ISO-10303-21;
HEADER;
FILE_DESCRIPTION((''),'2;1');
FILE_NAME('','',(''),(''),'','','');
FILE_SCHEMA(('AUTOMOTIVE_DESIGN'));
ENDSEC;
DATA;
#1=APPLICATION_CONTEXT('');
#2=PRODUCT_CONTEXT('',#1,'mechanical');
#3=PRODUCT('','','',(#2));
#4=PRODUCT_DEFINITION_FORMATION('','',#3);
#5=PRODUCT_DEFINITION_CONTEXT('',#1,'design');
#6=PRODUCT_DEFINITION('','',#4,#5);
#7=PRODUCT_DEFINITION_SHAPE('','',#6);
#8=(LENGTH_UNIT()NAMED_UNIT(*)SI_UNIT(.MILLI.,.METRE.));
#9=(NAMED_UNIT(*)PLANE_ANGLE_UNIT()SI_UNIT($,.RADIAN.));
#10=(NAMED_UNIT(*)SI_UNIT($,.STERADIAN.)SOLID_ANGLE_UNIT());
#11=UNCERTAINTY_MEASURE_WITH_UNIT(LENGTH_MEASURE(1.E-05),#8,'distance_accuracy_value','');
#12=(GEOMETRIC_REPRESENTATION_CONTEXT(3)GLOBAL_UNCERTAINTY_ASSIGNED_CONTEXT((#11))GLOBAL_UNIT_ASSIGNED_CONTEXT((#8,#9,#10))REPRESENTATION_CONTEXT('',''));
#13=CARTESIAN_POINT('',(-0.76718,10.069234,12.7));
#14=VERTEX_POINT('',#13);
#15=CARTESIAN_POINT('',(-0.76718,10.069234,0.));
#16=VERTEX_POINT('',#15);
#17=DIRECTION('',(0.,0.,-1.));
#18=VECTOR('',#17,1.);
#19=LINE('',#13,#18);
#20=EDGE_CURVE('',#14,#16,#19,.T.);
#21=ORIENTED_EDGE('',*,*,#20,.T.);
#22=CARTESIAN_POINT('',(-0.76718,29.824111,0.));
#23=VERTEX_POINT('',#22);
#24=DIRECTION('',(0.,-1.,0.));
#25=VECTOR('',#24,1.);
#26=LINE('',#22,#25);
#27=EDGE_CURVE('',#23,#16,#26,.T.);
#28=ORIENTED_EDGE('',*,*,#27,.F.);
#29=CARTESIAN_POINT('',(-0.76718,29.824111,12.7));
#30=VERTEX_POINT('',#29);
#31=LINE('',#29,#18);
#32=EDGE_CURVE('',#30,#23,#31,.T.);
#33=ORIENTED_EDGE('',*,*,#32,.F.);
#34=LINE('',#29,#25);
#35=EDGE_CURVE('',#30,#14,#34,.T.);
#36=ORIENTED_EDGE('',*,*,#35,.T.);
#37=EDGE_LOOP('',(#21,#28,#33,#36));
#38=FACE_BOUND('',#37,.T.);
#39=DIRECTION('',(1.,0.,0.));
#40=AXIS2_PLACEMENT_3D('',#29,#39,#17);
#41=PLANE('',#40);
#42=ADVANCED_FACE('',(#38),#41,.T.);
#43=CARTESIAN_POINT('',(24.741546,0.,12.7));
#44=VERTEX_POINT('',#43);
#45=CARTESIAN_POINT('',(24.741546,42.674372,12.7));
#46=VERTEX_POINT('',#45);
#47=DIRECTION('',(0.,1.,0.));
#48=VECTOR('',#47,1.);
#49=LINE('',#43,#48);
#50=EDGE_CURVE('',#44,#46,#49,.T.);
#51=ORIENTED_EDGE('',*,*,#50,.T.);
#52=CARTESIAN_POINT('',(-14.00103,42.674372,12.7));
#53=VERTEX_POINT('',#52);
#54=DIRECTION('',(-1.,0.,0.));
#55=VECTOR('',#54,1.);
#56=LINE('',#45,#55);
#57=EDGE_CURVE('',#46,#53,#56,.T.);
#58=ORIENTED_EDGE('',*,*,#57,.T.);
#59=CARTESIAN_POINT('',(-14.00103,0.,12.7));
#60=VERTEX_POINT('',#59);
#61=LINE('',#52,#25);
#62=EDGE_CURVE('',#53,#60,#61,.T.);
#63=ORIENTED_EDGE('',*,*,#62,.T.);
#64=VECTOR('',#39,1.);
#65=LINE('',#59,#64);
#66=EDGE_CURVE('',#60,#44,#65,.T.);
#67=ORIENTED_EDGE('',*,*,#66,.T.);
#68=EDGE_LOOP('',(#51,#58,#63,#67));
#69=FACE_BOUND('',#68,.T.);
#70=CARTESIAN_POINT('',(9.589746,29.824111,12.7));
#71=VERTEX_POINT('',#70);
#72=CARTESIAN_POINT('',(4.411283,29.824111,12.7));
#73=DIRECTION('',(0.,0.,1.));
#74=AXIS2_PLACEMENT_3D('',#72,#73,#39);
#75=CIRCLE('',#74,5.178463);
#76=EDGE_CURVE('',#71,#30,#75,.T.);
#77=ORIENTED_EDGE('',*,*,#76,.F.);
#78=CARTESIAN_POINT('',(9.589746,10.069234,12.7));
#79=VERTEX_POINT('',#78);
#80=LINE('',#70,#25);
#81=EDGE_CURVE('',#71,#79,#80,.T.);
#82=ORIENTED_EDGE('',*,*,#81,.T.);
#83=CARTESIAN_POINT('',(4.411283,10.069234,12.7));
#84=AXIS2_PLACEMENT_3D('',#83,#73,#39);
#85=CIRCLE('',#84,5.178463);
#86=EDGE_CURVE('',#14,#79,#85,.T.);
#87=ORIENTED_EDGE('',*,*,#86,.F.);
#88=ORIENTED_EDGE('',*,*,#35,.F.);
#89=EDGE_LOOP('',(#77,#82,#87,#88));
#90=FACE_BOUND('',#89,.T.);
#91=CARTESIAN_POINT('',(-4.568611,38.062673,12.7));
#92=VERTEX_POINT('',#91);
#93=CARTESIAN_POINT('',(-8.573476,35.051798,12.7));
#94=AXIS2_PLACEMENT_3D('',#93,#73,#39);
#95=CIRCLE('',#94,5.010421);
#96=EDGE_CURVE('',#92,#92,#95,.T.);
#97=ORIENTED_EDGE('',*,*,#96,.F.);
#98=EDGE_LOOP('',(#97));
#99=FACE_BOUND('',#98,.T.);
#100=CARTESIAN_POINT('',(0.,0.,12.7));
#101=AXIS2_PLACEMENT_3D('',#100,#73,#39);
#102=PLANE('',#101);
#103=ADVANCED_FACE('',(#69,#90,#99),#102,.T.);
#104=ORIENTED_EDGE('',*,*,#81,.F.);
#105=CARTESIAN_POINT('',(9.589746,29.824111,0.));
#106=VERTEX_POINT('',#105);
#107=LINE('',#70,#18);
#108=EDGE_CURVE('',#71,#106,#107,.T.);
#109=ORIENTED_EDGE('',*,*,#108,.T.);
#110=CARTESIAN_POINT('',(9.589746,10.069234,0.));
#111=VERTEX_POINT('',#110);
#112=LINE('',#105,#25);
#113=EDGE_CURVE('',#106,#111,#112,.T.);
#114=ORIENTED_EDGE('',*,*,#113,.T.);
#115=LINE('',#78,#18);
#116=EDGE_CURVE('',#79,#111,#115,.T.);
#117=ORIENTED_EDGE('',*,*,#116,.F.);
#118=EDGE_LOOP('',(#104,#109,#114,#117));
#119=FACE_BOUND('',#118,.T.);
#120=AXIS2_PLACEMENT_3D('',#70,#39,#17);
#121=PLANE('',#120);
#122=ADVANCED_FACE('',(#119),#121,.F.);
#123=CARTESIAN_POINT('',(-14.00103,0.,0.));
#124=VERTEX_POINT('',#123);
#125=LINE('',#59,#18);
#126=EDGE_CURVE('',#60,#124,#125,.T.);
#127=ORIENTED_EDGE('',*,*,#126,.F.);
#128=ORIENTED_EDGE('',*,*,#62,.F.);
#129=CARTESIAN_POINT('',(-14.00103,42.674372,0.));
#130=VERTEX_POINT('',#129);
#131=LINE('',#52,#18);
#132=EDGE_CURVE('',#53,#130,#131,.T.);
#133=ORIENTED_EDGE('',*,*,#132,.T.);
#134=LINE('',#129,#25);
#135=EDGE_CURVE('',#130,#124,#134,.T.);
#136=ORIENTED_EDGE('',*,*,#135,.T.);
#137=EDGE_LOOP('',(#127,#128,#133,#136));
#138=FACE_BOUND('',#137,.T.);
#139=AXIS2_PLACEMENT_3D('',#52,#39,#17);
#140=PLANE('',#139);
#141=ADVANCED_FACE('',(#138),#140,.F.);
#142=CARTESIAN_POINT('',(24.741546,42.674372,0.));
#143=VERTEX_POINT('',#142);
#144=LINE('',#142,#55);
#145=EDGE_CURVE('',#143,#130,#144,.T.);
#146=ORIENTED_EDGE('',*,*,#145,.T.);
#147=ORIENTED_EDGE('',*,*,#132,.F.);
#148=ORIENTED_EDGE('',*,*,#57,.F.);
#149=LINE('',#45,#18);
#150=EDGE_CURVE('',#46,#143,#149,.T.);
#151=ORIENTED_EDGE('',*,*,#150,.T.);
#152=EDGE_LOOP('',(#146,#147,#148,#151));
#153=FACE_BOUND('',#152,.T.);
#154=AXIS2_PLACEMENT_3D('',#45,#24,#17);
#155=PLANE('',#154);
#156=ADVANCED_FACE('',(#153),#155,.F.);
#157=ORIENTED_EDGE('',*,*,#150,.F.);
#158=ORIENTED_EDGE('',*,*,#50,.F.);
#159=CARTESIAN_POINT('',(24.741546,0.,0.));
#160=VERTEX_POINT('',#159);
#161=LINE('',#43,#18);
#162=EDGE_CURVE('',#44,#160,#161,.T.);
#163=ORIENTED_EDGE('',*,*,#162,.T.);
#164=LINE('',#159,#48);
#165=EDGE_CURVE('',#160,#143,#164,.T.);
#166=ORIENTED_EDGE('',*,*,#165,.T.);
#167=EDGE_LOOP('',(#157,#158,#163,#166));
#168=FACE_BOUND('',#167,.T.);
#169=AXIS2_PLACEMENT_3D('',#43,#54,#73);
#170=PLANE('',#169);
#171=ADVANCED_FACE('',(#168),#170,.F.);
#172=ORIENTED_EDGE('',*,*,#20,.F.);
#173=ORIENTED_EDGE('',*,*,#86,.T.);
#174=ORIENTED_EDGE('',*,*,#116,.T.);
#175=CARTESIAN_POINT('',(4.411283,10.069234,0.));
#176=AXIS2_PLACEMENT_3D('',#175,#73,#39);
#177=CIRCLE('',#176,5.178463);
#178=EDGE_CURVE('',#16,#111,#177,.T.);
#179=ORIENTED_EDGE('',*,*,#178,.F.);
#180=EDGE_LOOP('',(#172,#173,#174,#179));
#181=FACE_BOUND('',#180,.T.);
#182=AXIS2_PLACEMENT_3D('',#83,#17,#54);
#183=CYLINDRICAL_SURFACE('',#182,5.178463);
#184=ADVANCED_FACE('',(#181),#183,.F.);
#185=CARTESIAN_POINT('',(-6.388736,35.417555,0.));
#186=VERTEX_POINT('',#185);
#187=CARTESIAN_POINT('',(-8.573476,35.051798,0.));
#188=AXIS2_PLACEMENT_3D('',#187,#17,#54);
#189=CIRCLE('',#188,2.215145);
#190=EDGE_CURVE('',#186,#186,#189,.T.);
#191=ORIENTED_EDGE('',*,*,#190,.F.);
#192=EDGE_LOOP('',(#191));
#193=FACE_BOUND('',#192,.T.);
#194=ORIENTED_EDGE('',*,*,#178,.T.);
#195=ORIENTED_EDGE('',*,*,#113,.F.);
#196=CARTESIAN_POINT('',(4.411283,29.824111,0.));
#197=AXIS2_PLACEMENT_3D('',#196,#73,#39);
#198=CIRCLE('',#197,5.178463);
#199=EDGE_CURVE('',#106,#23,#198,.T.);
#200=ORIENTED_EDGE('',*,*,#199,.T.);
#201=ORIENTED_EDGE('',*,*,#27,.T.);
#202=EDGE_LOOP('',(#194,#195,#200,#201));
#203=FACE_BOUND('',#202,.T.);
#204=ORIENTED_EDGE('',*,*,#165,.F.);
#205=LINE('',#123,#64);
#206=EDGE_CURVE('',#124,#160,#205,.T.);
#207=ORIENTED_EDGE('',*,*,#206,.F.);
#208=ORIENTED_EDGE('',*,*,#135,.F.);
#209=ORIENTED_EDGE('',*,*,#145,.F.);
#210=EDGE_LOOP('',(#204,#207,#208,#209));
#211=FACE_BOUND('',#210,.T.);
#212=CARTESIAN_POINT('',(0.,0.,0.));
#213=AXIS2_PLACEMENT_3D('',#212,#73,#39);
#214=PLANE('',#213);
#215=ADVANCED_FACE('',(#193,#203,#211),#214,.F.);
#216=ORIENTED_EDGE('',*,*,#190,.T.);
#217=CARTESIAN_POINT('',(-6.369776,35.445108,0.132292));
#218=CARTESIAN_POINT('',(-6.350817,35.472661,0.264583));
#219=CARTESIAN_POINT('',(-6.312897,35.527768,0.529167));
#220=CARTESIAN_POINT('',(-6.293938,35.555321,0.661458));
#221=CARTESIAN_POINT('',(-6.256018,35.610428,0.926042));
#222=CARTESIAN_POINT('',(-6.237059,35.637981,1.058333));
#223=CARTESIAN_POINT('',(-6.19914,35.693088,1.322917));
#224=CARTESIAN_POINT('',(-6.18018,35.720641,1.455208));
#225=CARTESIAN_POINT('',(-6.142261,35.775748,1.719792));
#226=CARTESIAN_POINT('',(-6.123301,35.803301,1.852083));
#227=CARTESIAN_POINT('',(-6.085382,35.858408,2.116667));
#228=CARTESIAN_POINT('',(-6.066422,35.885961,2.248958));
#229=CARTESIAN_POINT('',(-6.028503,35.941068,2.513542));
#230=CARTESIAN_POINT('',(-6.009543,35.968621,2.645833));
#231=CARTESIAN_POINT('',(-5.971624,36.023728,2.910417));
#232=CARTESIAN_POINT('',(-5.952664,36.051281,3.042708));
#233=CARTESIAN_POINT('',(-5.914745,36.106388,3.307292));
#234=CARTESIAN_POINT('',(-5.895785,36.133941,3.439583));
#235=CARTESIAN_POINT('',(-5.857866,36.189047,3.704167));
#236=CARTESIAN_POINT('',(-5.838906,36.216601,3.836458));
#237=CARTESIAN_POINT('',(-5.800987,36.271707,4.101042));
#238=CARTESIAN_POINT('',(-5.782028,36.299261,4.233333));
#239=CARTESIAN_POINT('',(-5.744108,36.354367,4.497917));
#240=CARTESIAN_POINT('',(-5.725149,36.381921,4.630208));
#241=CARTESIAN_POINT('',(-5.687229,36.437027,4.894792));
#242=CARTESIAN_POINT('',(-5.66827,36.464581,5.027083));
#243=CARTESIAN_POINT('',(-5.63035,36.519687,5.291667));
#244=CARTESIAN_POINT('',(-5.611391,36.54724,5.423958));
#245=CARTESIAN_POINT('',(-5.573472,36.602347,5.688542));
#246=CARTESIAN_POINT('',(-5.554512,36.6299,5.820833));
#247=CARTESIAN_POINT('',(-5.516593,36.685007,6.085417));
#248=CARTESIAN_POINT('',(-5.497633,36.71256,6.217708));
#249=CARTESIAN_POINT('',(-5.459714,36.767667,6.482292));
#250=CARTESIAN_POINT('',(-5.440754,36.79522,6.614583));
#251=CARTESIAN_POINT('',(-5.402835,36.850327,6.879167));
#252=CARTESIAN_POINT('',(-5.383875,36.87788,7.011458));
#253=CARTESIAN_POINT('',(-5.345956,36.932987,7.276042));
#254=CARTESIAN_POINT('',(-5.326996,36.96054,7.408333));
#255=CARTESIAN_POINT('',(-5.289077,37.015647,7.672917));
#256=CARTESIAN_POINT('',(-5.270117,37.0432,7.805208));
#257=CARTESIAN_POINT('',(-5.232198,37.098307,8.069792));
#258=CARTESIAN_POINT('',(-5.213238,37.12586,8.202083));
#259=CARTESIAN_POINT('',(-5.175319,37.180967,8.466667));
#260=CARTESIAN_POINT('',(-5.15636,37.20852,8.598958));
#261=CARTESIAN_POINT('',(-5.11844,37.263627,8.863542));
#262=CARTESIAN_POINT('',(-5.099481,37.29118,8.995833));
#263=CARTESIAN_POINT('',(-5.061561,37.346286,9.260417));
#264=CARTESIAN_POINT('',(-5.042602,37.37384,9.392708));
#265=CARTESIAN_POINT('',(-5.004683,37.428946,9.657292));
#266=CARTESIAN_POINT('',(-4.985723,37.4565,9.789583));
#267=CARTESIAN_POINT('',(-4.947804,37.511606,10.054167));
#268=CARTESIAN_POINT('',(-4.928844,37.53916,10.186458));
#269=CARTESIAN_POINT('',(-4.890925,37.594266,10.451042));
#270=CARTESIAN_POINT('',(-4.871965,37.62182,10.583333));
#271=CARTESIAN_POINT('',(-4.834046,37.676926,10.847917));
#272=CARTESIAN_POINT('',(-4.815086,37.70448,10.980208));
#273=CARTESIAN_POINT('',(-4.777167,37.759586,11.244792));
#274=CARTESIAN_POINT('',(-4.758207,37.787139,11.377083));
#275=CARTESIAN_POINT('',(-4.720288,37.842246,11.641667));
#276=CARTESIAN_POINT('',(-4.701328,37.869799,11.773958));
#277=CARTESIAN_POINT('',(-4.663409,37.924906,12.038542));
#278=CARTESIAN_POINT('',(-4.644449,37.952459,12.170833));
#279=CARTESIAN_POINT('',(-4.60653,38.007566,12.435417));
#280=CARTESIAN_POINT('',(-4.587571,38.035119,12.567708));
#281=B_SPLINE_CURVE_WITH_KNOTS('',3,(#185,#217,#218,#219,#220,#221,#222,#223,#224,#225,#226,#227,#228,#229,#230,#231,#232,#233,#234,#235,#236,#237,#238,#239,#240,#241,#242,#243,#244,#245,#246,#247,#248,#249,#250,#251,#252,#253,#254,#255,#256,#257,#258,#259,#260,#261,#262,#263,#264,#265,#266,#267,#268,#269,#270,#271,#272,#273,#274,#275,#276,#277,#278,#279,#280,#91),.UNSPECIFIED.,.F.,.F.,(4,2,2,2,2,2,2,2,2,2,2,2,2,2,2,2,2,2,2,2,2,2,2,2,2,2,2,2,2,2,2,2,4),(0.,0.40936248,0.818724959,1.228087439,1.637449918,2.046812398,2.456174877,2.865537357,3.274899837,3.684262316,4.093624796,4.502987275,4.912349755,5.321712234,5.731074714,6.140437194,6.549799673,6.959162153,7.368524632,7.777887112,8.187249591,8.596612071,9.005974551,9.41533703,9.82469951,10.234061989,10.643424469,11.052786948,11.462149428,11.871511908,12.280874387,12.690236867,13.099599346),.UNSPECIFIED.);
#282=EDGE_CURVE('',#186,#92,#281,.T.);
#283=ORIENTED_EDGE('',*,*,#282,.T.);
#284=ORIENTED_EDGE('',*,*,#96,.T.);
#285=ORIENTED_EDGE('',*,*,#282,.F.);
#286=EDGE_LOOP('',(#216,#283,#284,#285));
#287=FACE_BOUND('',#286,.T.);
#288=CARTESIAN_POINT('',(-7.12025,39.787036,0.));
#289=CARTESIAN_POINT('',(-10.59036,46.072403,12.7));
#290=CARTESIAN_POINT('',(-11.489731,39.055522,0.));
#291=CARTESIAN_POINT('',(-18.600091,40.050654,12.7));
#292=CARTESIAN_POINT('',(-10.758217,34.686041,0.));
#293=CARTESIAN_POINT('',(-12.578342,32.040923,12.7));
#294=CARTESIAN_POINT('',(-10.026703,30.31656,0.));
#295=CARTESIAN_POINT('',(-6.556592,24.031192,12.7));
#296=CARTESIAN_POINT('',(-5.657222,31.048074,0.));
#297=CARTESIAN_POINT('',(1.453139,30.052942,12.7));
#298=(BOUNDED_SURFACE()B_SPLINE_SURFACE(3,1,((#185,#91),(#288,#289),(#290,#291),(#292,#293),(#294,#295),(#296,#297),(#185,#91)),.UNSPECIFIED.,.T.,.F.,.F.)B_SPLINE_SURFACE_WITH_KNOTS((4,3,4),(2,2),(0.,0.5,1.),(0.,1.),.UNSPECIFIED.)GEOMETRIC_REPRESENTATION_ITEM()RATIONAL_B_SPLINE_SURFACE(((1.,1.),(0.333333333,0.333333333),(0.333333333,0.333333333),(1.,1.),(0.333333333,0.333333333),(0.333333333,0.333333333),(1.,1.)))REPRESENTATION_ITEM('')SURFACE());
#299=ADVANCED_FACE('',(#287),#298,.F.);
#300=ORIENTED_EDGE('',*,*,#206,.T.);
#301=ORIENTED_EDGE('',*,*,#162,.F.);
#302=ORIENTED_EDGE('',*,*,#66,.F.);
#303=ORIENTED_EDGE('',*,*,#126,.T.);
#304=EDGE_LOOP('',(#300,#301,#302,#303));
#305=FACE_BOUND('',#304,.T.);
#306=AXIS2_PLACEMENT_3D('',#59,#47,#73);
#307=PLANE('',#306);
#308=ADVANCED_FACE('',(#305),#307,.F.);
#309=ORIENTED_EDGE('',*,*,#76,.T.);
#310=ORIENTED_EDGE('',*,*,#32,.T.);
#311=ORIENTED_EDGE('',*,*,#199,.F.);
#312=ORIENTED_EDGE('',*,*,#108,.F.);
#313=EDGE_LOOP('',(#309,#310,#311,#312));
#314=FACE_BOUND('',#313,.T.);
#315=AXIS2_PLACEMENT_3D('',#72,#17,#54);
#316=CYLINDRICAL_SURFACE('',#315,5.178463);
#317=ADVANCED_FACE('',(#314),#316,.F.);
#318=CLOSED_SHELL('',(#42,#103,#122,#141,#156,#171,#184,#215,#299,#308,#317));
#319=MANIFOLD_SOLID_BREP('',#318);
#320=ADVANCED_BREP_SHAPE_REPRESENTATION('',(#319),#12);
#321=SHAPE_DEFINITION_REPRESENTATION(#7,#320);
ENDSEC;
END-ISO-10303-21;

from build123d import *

# Parameters (mm, degrees)
SKETCH1_W           = 38.742575614
SKETCH1_H           = 42.674371655
BOSS_EXTRUDE1_DEPTH = 12.7


with BuildPart() as part:
    # Sketch1 → Boss-Extrude1 (new body)
    with BuildSketch(Plane.XY):
        with Locations((5.370258006, 21.337185828)):
            Rectangle(SKETCH1_W, SKETCH1_H)
        with BuildLine():
            Line((9.589746439, 29.824111426), (9.589746439, 10.069233761))
            ThreePointArc((9.589746439, 10.069233761), (4.411283362, 4.890770684), (-0.767179715, 10.069233761))
            Line((-0.767179715, 10.069233761), (-0.767179715, 29.824111426))
            ThreePointArc((-0.767179715, 29.824111426), (4.411283362, 35.002574503), (9.589746439, 29.824111426))
        make_face(mode=Mode.SUBTRACT)
    extrude(amount=BOSS_EXTRUDE1_DEPTH)

    # Cut-Loft1: read off the stored shape, not the designer's step
    # Cut-Loft1: loft between two sections, ruled curve by curve
    cut_loft1_from = [
        Edge.make_bspline([(-6.388735864, 35.417554769, 0), (-7.120249807, 39.787035762, 0), (-11.489730799, 39.055521819, 0), (-10.758216856, 34.686040826, 0), (-10.026702913, 30.316559834, 0), (-5.657221921, 31.048073777, 0), (-6.388735864, 35.417554769, 0)], [0, 0, 0, 0, 0.5, 0.5, 0.5, 1, 1, 1, 1], 3, [1, 0.333333333, 0.333333333, 1, 0.333333333, 0.333333333, 1]),
    ]
    cut_loft1_to = [
        Edge.make_bspline([(-4.568610902, 38.062672565, 12.7), (-10.590360438, 46.072403481, 12.7), (-18.600091353, 40.050653945, 12.7), (-12.578341818, 32.04092303, 12.7), (-6.556592282, 24.031192114, 12.7), (1.453138633, 30.05294165, 12.7), (-4.568610902, 38.062672565, 12.7)], [0, 0, 0, 0, 0.5, 0.5, 0.5, 1, 1, 1, 1], 3, [1, 0.333333333, 0.333333333, 1, 0.333333333, 0.333333333, 1]),
    ]
    cut_loft1 = Solid(Shell([*[Face.make_surface_from_curves(cut_loft1_from[k], cut_loft1_to[k]) for k in range(1)], Face(Wire(cut_loft1_from)), Face(Wire(cut_loft1_to))]))
    add(cut_loft1, mode=Mode.SUBTRACT)


solid = part.part
